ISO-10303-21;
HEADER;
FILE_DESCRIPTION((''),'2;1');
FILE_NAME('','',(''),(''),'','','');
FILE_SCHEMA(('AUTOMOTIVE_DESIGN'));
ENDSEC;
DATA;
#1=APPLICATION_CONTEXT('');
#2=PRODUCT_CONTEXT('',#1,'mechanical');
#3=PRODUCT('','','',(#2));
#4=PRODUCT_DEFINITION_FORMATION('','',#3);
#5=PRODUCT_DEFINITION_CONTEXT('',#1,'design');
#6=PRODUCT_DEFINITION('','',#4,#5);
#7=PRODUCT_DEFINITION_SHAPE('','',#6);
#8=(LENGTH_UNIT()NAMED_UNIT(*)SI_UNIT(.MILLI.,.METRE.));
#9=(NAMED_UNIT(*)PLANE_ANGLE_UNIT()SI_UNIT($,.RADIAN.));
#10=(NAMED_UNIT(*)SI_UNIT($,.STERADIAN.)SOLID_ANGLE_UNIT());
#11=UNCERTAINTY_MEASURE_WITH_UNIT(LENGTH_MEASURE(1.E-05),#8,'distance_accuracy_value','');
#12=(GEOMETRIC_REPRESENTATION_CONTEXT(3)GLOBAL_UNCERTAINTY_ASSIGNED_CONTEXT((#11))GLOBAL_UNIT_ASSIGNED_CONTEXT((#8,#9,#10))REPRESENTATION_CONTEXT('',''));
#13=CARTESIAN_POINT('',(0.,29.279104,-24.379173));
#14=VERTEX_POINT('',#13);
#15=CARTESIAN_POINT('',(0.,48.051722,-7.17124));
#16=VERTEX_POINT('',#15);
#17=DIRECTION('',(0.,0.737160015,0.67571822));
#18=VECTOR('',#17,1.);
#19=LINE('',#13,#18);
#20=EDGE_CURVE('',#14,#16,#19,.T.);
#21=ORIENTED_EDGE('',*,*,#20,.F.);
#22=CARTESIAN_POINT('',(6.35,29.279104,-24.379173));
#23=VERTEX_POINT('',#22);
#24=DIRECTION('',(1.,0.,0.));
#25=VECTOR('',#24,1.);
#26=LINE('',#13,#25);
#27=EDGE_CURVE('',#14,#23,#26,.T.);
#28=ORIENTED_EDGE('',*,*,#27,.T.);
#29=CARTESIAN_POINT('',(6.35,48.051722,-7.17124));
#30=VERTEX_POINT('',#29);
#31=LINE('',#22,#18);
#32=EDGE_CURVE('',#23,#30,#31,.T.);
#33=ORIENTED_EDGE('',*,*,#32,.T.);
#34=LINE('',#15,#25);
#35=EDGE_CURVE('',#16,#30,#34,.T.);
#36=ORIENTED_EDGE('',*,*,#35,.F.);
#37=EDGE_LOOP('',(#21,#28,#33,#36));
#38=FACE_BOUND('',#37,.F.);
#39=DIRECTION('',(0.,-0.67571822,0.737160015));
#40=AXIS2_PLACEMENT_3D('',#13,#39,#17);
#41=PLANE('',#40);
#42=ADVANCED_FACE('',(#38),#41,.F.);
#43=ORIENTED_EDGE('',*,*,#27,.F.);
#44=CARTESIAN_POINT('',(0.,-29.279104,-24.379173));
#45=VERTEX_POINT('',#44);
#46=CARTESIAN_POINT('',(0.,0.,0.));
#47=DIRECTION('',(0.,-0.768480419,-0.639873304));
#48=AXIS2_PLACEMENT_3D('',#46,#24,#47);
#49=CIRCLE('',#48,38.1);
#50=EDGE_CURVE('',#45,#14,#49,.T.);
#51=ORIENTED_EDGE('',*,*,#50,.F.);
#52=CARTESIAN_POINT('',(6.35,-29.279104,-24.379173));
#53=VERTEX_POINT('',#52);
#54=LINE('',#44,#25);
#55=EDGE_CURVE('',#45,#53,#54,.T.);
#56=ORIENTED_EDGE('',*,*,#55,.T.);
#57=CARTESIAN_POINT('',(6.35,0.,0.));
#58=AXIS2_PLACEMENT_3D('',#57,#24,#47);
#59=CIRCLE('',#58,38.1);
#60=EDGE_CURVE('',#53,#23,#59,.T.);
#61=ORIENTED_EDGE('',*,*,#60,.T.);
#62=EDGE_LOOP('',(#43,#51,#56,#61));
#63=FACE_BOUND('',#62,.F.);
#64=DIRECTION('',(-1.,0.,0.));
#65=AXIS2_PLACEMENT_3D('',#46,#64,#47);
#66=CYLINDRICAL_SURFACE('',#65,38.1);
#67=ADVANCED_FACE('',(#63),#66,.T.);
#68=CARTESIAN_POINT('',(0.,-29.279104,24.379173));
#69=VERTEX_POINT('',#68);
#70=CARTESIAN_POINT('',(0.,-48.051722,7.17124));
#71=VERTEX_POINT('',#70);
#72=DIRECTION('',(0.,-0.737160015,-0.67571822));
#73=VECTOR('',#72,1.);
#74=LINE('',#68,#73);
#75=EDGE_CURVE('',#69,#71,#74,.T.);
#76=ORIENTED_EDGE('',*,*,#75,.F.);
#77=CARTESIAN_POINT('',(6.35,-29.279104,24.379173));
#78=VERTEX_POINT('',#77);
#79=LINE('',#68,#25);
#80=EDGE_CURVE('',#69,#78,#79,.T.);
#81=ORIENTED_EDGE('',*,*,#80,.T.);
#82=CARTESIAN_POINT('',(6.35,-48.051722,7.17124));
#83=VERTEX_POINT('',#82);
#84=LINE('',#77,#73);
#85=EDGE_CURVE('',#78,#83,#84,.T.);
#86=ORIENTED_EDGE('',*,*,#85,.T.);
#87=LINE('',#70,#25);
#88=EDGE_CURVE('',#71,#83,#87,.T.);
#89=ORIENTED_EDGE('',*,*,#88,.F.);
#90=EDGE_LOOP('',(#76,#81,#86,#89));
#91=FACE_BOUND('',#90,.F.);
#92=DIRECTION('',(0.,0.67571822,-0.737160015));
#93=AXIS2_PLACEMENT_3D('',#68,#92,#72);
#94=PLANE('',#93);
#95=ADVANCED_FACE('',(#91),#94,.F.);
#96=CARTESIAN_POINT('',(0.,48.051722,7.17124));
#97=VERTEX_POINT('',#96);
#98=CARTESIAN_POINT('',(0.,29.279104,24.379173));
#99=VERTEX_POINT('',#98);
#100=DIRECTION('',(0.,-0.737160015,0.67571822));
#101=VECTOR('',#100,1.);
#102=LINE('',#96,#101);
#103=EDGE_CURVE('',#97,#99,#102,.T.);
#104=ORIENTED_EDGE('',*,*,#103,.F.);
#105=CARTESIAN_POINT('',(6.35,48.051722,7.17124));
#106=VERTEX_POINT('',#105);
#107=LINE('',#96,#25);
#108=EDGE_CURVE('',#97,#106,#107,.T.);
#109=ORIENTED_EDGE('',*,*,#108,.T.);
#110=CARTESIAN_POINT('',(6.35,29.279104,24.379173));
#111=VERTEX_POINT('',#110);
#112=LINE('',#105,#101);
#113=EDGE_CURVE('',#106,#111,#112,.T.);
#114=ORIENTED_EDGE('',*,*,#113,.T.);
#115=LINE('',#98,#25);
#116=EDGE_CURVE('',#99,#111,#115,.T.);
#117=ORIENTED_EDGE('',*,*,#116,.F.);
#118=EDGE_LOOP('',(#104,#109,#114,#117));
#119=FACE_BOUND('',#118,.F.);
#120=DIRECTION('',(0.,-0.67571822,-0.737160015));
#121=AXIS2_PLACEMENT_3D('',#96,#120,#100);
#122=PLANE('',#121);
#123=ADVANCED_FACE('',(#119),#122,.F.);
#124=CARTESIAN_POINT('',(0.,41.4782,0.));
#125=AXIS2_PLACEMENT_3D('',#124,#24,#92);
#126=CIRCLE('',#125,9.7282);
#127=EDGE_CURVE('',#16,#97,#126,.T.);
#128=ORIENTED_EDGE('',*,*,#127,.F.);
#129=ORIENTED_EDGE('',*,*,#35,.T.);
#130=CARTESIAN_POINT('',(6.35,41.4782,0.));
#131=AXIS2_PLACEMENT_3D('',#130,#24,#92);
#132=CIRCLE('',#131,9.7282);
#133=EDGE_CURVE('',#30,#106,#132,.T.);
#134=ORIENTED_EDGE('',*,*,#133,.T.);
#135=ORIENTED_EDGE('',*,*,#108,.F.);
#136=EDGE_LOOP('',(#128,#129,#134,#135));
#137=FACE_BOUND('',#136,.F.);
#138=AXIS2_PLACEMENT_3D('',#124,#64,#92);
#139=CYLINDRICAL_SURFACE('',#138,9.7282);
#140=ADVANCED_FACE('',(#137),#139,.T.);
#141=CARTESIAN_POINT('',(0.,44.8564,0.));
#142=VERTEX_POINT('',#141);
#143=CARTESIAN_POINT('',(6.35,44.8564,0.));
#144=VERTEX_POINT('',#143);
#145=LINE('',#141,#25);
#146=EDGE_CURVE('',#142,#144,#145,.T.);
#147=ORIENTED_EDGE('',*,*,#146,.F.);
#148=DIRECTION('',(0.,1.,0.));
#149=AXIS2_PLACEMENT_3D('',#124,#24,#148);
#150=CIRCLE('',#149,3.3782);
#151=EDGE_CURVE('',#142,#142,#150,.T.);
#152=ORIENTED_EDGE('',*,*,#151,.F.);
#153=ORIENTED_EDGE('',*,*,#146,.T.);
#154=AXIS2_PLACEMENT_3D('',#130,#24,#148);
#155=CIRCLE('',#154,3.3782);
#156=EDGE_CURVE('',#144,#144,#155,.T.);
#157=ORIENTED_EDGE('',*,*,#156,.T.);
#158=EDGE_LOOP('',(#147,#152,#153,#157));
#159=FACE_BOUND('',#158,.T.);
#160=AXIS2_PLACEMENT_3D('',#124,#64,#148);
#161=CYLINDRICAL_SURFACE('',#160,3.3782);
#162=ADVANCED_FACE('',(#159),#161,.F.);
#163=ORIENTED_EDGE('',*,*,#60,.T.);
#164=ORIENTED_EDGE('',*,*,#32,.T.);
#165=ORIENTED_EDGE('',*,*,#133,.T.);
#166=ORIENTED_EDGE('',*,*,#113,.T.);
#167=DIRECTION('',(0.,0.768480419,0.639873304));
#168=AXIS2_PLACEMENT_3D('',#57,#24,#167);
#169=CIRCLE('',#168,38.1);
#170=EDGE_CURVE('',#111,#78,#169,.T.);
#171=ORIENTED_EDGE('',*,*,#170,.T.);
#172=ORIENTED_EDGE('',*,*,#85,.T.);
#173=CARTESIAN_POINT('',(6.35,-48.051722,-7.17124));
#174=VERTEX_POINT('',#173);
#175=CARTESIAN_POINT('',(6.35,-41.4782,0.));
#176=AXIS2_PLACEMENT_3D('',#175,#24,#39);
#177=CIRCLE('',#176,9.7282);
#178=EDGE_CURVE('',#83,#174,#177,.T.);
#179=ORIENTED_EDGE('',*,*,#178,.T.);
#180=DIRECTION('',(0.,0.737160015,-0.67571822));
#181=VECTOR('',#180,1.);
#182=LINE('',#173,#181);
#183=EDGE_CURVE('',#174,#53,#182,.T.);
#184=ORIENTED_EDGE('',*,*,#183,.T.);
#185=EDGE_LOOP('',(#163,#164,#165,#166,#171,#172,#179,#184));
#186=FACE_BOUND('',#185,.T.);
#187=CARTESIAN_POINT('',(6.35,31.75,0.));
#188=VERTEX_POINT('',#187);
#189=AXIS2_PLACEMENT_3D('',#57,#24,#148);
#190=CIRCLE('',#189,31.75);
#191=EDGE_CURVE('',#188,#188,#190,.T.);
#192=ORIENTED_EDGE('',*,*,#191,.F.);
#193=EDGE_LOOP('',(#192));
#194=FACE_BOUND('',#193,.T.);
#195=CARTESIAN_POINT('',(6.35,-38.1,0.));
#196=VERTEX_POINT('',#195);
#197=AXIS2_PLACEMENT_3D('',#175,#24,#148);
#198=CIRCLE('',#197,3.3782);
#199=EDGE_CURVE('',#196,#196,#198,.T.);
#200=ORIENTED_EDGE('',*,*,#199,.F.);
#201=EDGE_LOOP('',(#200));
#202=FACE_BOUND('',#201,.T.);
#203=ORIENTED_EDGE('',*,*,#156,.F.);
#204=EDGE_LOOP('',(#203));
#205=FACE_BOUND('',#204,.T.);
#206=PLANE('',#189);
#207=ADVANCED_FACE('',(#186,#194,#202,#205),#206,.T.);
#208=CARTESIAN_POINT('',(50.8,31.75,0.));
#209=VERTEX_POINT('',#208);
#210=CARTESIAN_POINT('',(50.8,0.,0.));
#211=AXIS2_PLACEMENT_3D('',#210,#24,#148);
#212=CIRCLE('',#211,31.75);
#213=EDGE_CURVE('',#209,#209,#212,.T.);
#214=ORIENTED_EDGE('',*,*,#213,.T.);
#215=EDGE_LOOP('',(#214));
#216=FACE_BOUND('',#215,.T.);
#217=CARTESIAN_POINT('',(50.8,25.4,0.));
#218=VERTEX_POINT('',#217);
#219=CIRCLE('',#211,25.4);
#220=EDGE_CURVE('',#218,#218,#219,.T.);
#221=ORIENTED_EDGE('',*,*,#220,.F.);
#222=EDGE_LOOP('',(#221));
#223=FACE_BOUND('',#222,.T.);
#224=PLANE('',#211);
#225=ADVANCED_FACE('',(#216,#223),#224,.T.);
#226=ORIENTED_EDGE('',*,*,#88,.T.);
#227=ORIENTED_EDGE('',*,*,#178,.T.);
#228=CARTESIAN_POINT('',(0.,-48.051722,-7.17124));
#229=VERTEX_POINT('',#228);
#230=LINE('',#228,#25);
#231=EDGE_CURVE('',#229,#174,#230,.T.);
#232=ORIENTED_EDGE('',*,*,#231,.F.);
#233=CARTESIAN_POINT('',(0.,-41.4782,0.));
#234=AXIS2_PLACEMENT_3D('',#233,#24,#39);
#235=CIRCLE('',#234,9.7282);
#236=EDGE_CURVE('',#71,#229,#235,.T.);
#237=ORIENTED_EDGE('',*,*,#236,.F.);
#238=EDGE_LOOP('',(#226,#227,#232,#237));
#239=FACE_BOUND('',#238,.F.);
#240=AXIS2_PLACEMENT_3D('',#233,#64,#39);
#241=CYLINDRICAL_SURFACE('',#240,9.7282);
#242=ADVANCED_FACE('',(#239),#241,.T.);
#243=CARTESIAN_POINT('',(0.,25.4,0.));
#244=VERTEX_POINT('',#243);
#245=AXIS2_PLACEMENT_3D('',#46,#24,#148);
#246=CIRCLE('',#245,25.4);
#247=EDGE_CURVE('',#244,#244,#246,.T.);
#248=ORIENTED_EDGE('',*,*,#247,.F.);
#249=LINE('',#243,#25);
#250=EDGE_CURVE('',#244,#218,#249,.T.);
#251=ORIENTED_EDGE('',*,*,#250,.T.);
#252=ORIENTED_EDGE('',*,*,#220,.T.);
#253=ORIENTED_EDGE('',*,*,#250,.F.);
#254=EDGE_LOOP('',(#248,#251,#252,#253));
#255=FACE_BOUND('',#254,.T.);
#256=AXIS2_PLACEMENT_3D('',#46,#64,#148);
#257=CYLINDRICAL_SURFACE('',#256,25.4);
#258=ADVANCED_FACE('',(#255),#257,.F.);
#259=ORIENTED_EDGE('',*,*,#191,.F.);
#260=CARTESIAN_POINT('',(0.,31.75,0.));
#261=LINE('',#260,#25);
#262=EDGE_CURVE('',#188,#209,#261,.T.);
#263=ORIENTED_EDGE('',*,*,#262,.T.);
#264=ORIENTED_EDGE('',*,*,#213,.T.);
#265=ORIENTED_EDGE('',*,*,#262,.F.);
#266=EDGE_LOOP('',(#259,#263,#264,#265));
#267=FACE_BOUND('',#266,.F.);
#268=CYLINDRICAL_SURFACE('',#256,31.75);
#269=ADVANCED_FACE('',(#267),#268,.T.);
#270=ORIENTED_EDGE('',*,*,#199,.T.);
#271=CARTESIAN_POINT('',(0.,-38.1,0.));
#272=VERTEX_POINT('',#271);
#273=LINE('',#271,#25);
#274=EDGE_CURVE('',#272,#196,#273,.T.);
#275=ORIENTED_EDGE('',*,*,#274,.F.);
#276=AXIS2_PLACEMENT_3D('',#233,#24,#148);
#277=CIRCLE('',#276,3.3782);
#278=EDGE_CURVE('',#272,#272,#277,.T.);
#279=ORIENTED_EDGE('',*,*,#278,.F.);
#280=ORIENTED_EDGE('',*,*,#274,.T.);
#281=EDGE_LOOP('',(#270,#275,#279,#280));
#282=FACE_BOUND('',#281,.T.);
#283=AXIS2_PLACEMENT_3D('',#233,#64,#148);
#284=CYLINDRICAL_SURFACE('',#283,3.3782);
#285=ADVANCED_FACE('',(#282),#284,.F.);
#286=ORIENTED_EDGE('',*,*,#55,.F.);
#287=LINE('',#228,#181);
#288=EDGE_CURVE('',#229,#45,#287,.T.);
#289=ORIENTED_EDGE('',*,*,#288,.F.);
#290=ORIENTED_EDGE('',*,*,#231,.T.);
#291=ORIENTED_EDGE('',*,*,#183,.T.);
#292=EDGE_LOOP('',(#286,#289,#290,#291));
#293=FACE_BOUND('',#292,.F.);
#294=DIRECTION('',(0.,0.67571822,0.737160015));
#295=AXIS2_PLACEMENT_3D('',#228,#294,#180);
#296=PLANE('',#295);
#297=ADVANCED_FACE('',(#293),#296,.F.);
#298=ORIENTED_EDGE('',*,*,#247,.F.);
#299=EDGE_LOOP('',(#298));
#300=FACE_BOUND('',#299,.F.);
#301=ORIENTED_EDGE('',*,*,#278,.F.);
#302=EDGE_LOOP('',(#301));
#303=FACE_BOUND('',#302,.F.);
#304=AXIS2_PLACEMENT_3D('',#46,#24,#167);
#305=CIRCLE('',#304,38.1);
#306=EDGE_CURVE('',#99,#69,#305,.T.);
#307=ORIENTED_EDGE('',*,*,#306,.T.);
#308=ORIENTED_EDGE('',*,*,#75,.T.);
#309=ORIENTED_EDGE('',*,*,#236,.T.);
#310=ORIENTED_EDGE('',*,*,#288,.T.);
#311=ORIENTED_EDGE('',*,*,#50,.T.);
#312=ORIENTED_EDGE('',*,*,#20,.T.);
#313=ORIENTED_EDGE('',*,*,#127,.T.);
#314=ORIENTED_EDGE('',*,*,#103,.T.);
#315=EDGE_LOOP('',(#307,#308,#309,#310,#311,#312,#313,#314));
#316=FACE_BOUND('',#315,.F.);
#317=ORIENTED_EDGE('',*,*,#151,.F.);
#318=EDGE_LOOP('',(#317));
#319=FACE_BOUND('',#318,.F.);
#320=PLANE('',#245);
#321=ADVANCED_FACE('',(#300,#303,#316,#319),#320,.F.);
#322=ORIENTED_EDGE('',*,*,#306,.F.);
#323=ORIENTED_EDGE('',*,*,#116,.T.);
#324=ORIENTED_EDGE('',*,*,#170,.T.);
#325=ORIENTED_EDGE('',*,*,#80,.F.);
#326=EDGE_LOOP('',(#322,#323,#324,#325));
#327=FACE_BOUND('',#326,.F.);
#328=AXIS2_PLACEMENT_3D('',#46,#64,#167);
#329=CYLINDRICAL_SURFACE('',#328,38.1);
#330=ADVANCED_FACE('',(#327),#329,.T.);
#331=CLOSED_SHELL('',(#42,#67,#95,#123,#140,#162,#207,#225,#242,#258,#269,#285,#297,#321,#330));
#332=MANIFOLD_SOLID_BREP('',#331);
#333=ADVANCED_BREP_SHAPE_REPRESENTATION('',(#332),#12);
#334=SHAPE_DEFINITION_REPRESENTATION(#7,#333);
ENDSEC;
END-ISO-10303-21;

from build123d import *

# Parameters (mm, degrees)
F0_R     = 31.75
F0_R_2   = 25.4
F1_DEPTH = 50.8
F0_R_3   = 3.3782
F2_DEPTH = 6.35


# Not quite as in the source:
# - a feature names something its author has since deleted; it is built from what else it names


with BuildPart() as f1:
    # F0 (on Right) → F1 (new body)
    with BuildSketch(Plane.YZ):
        Circle(F0_R)
        Circle(F0_R_2, mode=Mode.SUBTRACT)
    extrude(amount=F1_DEPTH)

    # F0 (on Right) → F2 (join)
    with BuildSketch(Plane.YZ):
        with BuildLine():
            Line((-48.0517219843, -7.1712400574), (-29.2791039707, -24.3791728874))
            ThreePointArc((-29.2791039707, -24.3791728874), (0, -38.1), (29.2791039707, -24.3791728874))
            Line((29.2791039707, -24.3791728874), (48.0517219843, -7.1712400574))
            ThreePointArc((48.0517219843, -7.1712400574), (51.2064, 0), (48.0517219843, 7.1712400574))
            Line((48.0517219843, 7.1712400574), (29.2791039707, 24.3791728874))
            ThreePointArc((29.2791039707, 24.3791728874), (0, 38.1), (-29.2791039707, 24.3791728874))
            Line((-29.2791039707, 24.3791728874), (-48.0517219843, 7.1712400574))
            ThreePointArc((-48.0517219843, 7.1712400574), (-51.2064, 0), (-48.0517219843, -7.1712400574))
        make_face()
        with Locations((-41.4782, 0)):
            Circle(F0_R_3, mode=Mode.SUBTRACT)
        Circle(F0_R, mode=Mode.SUBTRACT)
        with Locations((41.4782, 0)):
            Circle(F0_R_3, mode=Mode.SUBTRACT)
    extrude(amount=F2_DEPTH)


solid = f1.part
